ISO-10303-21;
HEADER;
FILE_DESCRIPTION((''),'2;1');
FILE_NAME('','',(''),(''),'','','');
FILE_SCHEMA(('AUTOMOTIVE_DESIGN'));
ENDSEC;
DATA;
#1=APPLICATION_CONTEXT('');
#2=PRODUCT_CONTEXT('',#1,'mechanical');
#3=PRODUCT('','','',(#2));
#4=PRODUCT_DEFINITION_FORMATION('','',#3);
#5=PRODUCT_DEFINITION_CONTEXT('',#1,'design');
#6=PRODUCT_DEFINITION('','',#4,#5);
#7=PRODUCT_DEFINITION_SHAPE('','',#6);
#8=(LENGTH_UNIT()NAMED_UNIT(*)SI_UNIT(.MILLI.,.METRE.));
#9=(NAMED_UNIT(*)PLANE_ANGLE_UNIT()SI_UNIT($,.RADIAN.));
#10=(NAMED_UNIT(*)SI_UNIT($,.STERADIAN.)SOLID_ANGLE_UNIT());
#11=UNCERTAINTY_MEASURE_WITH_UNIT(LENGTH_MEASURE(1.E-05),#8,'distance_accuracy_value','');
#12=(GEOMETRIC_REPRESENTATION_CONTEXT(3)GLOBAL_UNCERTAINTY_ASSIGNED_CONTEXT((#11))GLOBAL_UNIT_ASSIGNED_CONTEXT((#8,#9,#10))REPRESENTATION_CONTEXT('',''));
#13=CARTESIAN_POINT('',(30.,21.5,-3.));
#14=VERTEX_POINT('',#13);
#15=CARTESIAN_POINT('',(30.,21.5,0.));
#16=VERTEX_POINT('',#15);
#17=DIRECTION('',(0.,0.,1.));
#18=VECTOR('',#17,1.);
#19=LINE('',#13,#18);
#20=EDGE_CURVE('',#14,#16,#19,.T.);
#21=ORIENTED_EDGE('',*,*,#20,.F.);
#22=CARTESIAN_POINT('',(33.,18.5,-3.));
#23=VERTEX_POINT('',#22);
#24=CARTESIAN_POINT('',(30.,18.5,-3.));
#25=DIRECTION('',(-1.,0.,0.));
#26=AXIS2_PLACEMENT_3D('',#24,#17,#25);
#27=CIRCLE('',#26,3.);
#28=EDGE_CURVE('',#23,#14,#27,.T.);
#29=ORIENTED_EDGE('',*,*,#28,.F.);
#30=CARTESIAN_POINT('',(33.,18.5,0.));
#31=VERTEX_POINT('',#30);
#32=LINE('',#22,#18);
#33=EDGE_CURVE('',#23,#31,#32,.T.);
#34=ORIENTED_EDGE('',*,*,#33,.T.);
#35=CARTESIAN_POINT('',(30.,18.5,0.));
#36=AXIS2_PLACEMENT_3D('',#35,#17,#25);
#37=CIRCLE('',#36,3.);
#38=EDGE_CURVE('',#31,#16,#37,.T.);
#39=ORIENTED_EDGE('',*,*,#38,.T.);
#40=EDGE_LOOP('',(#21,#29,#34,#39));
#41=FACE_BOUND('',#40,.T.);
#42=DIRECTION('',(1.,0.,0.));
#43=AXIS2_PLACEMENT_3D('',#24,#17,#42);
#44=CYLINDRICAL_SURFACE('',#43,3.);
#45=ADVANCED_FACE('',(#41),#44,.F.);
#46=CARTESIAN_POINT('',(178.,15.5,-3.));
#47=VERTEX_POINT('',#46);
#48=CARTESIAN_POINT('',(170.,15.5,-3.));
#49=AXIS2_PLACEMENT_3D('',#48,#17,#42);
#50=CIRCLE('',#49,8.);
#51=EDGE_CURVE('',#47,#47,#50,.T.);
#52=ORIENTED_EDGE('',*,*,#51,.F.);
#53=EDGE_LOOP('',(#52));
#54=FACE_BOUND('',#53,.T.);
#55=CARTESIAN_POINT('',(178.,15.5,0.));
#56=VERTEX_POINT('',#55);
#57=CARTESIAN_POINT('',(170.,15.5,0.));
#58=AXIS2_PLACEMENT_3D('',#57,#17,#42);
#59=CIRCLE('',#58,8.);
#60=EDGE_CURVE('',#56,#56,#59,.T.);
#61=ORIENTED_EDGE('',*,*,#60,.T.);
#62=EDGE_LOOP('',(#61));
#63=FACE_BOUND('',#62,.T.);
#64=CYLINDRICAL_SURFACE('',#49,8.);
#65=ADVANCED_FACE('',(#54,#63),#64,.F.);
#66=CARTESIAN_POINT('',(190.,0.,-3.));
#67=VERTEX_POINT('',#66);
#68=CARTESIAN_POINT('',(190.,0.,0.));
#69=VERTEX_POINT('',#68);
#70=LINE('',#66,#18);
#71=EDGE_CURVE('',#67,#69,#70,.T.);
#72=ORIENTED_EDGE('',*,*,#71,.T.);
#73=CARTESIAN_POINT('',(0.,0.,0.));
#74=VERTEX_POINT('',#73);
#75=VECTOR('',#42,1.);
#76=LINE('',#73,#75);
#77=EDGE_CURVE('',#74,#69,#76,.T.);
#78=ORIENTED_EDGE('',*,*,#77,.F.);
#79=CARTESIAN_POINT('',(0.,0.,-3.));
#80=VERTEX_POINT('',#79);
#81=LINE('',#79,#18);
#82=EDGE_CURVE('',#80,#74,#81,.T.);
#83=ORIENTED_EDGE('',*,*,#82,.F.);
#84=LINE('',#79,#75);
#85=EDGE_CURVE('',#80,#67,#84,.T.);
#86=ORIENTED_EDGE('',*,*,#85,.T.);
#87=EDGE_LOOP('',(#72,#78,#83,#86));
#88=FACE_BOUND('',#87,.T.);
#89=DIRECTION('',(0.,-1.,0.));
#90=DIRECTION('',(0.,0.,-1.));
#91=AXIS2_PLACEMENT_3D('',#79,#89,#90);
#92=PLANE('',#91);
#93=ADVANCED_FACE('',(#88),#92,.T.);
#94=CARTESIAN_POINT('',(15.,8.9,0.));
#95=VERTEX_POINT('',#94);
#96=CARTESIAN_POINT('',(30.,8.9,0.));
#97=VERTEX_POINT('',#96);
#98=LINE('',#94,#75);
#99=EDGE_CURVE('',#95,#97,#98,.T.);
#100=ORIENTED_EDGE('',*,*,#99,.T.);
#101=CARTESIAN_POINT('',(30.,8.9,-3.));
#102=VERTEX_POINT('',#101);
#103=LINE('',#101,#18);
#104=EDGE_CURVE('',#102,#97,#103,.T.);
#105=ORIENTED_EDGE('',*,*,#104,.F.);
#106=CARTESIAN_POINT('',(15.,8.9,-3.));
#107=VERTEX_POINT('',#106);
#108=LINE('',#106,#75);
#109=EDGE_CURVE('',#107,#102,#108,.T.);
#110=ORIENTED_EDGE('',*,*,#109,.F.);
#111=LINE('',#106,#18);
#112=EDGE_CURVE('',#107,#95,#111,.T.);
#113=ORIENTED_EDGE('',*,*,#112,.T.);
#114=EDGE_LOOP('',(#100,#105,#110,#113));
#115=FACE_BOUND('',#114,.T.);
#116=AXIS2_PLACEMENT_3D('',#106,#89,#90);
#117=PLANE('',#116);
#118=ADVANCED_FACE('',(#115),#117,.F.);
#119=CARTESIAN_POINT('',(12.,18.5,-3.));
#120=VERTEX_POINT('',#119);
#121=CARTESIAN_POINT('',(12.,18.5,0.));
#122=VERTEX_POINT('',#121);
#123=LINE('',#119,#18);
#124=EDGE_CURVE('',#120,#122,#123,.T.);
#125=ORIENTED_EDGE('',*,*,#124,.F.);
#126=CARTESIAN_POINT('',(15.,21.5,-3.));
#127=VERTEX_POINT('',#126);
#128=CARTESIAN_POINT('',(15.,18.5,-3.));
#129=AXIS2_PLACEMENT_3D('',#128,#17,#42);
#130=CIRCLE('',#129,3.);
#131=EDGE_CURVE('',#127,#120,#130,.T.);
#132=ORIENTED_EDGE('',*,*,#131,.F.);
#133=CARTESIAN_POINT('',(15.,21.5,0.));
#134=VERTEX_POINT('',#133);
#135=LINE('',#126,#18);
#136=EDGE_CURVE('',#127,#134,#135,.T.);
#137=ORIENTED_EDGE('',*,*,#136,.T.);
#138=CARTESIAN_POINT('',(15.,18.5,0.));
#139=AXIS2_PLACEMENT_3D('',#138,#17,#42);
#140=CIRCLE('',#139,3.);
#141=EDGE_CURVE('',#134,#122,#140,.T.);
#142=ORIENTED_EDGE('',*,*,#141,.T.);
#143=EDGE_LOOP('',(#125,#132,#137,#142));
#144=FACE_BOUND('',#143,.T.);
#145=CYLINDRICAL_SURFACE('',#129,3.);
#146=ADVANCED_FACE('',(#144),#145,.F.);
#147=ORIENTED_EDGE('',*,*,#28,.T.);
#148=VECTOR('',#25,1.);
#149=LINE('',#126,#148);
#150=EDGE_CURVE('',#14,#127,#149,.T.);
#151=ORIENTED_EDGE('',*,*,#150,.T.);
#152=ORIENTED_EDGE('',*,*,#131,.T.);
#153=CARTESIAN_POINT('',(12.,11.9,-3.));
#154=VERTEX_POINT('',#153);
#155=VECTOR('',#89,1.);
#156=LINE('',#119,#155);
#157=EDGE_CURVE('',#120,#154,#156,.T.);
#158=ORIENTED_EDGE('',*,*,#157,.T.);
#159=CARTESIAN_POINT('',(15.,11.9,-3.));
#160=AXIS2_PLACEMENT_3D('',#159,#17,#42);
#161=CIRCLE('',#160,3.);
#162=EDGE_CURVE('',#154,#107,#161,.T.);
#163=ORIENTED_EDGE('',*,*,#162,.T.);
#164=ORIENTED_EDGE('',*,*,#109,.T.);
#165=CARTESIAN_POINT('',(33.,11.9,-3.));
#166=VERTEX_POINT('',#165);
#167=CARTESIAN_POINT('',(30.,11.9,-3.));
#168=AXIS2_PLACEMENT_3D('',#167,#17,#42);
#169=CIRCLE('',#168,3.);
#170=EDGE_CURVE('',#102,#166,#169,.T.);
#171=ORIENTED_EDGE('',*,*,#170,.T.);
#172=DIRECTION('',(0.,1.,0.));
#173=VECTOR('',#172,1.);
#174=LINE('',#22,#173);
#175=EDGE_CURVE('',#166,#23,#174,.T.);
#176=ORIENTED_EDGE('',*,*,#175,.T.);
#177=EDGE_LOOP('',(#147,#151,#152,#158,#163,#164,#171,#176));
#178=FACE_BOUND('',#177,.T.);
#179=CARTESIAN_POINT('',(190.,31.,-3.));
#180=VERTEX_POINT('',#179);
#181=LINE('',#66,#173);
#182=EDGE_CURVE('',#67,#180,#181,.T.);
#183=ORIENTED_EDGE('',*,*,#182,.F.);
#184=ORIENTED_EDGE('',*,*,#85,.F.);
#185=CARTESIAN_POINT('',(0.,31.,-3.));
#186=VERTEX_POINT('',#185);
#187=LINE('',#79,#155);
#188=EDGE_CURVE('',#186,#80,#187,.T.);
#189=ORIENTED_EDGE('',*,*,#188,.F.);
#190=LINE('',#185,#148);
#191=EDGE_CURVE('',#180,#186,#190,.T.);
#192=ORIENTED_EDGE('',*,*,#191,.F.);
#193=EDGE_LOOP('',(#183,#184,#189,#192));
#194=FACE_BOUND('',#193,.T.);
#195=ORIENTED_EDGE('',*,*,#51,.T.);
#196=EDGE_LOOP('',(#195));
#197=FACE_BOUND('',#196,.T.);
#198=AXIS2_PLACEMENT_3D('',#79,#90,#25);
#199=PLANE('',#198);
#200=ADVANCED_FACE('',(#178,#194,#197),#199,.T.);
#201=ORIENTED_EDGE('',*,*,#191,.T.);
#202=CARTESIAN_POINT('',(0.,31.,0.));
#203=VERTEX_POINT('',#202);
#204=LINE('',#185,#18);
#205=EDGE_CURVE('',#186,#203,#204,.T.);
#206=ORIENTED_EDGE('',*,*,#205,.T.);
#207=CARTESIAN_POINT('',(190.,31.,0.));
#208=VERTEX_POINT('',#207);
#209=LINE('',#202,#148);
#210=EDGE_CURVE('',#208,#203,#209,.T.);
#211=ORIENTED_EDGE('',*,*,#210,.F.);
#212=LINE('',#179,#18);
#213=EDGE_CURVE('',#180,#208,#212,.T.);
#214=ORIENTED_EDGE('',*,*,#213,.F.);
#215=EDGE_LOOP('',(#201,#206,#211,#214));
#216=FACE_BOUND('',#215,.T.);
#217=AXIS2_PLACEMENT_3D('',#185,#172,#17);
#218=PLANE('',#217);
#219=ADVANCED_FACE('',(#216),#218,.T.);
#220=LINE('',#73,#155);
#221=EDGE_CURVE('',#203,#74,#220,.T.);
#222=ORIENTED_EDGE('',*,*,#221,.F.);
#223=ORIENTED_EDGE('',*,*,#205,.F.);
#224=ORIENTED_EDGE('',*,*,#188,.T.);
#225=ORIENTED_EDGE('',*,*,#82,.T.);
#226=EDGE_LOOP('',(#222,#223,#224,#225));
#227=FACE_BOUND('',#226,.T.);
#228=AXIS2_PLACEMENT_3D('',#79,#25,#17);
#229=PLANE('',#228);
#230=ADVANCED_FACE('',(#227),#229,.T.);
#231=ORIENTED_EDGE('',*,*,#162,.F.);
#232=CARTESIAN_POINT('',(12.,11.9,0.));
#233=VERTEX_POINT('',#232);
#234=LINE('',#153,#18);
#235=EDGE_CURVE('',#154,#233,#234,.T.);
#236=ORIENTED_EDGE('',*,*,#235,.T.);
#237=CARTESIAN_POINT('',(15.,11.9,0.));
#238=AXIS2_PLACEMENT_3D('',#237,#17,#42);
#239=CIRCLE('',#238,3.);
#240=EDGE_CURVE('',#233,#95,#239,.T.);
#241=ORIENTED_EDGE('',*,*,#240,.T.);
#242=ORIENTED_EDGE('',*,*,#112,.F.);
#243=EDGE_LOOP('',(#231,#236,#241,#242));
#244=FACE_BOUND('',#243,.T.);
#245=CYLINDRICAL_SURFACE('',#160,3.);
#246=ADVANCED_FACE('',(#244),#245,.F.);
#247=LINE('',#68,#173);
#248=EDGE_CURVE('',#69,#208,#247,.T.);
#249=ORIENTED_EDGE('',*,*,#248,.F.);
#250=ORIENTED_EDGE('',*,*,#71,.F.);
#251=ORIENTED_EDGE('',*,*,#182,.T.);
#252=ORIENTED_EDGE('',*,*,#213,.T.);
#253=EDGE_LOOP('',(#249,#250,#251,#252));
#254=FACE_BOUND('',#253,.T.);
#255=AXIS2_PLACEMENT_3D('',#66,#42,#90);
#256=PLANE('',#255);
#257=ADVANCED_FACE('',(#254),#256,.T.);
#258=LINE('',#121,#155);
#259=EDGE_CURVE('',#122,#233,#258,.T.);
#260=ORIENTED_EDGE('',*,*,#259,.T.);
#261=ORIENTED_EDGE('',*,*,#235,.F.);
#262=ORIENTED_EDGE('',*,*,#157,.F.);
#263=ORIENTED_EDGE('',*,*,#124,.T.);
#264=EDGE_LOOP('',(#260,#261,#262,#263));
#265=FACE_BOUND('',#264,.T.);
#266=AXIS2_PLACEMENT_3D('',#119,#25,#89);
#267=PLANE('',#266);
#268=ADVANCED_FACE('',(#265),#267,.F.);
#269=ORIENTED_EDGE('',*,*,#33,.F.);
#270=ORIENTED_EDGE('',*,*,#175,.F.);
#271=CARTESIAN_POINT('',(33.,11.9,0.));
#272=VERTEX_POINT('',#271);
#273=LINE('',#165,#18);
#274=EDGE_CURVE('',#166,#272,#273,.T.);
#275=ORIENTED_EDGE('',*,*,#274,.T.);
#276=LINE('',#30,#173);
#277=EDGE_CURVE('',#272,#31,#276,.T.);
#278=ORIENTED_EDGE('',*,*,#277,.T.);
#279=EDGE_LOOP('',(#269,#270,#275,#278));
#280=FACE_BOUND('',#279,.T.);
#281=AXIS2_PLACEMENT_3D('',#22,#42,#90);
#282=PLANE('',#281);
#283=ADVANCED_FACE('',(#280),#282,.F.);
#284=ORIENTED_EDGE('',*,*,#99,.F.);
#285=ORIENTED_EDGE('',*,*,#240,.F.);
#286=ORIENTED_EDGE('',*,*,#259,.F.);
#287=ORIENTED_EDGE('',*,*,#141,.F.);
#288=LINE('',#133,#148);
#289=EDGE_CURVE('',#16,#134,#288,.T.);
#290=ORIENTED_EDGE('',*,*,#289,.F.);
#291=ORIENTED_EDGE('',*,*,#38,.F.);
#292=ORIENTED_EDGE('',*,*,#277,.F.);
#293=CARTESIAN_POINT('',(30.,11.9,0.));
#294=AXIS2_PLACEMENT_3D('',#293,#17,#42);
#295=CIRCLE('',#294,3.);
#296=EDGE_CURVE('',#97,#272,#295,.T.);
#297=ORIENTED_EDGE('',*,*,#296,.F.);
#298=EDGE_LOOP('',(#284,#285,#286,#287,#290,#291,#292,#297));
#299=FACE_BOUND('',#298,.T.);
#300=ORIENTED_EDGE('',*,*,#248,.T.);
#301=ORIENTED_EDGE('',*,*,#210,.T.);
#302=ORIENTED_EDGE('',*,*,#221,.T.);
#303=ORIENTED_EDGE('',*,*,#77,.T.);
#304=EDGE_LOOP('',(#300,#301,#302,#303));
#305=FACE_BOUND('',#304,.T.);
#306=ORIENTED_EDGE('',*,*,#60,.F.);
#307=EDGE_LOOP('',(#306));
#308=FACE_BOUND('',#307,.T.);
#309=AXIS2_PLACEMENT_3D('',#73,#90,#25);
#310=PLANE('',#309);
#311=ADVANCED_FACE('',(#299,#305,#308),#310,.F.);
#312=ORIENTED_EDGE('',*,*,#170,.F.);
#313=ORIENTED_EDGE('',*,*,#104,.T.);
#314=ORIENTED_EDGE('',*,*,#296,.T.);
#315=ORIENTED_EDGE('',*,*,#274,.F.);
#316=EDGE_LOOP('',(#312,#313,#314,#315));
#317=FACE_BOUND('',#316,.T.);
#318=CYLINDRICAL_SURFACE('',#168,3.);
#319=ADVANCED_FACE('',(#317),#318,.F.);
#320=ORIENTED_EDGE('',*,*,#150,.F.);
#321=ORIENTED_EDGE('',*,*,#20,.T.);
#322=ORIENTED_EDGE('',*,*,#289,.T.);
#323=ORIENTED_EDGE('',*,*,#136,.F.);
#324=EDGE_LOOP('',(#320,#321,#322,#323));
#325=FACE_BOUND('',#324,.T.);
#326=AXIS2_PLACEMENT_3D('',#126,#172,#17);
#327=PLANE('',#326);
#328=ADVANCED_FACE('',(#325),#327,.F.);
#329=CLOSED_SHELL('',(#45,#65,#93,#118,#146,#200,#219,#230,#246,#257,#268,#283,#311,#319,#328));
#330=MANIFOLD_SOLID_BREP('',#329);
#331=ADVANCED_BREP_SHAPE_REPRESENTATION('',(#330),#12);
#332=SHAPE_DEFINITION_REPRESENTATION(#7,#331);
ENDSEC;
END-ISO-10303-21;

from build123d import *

# Parameters (mm, degrees)
SKETCH1_W          = 190
SKETCH1_H          = 31
SKETCH1_R          = 8
BASE_FLANGE1_DEPTH = 3


# Sheet-metal steps are written as plain solids
with BuildPart() as part:
    # Sketch1 → Base-Flange1 (new body)
    with BuildSketch(Plane.XY):
        with Locations((95, 15.5)):
            Rectangle(SKETCH1_W, SKETCH1_H)
        with Locations((170, 15.5)):
            Circle(SKETCH1_R, mode=Mode.SUBTRACT)
        with BuildLine():
            Line((15, 21.5), (30, 21.5))
            ThreePointArc((30, 21.5), (32.121320344, 20.621320344), (33, 18.5))
            Line((33, 18.5), (33, 11.9))
            ThreePointArc((33, 11.9), (32.121320344, 9.778679656), (30, 8.9))
            Line((30, 8.9), (15, 8.9))
            ThreePointArc((15, 8.9), (12.878679656, 9.778679656), (12, 11.9))
            Line((12, 11.9), (12, 18.5))
            ThreePointArc((12, 18.5), (12.878679656, 20.621320344), (15, 21.5))
        make_face(mode=Mode.SUBTRACT)
    extrude(amount=-BASE_FLANGE1_DEPTH)


solid = part.part
